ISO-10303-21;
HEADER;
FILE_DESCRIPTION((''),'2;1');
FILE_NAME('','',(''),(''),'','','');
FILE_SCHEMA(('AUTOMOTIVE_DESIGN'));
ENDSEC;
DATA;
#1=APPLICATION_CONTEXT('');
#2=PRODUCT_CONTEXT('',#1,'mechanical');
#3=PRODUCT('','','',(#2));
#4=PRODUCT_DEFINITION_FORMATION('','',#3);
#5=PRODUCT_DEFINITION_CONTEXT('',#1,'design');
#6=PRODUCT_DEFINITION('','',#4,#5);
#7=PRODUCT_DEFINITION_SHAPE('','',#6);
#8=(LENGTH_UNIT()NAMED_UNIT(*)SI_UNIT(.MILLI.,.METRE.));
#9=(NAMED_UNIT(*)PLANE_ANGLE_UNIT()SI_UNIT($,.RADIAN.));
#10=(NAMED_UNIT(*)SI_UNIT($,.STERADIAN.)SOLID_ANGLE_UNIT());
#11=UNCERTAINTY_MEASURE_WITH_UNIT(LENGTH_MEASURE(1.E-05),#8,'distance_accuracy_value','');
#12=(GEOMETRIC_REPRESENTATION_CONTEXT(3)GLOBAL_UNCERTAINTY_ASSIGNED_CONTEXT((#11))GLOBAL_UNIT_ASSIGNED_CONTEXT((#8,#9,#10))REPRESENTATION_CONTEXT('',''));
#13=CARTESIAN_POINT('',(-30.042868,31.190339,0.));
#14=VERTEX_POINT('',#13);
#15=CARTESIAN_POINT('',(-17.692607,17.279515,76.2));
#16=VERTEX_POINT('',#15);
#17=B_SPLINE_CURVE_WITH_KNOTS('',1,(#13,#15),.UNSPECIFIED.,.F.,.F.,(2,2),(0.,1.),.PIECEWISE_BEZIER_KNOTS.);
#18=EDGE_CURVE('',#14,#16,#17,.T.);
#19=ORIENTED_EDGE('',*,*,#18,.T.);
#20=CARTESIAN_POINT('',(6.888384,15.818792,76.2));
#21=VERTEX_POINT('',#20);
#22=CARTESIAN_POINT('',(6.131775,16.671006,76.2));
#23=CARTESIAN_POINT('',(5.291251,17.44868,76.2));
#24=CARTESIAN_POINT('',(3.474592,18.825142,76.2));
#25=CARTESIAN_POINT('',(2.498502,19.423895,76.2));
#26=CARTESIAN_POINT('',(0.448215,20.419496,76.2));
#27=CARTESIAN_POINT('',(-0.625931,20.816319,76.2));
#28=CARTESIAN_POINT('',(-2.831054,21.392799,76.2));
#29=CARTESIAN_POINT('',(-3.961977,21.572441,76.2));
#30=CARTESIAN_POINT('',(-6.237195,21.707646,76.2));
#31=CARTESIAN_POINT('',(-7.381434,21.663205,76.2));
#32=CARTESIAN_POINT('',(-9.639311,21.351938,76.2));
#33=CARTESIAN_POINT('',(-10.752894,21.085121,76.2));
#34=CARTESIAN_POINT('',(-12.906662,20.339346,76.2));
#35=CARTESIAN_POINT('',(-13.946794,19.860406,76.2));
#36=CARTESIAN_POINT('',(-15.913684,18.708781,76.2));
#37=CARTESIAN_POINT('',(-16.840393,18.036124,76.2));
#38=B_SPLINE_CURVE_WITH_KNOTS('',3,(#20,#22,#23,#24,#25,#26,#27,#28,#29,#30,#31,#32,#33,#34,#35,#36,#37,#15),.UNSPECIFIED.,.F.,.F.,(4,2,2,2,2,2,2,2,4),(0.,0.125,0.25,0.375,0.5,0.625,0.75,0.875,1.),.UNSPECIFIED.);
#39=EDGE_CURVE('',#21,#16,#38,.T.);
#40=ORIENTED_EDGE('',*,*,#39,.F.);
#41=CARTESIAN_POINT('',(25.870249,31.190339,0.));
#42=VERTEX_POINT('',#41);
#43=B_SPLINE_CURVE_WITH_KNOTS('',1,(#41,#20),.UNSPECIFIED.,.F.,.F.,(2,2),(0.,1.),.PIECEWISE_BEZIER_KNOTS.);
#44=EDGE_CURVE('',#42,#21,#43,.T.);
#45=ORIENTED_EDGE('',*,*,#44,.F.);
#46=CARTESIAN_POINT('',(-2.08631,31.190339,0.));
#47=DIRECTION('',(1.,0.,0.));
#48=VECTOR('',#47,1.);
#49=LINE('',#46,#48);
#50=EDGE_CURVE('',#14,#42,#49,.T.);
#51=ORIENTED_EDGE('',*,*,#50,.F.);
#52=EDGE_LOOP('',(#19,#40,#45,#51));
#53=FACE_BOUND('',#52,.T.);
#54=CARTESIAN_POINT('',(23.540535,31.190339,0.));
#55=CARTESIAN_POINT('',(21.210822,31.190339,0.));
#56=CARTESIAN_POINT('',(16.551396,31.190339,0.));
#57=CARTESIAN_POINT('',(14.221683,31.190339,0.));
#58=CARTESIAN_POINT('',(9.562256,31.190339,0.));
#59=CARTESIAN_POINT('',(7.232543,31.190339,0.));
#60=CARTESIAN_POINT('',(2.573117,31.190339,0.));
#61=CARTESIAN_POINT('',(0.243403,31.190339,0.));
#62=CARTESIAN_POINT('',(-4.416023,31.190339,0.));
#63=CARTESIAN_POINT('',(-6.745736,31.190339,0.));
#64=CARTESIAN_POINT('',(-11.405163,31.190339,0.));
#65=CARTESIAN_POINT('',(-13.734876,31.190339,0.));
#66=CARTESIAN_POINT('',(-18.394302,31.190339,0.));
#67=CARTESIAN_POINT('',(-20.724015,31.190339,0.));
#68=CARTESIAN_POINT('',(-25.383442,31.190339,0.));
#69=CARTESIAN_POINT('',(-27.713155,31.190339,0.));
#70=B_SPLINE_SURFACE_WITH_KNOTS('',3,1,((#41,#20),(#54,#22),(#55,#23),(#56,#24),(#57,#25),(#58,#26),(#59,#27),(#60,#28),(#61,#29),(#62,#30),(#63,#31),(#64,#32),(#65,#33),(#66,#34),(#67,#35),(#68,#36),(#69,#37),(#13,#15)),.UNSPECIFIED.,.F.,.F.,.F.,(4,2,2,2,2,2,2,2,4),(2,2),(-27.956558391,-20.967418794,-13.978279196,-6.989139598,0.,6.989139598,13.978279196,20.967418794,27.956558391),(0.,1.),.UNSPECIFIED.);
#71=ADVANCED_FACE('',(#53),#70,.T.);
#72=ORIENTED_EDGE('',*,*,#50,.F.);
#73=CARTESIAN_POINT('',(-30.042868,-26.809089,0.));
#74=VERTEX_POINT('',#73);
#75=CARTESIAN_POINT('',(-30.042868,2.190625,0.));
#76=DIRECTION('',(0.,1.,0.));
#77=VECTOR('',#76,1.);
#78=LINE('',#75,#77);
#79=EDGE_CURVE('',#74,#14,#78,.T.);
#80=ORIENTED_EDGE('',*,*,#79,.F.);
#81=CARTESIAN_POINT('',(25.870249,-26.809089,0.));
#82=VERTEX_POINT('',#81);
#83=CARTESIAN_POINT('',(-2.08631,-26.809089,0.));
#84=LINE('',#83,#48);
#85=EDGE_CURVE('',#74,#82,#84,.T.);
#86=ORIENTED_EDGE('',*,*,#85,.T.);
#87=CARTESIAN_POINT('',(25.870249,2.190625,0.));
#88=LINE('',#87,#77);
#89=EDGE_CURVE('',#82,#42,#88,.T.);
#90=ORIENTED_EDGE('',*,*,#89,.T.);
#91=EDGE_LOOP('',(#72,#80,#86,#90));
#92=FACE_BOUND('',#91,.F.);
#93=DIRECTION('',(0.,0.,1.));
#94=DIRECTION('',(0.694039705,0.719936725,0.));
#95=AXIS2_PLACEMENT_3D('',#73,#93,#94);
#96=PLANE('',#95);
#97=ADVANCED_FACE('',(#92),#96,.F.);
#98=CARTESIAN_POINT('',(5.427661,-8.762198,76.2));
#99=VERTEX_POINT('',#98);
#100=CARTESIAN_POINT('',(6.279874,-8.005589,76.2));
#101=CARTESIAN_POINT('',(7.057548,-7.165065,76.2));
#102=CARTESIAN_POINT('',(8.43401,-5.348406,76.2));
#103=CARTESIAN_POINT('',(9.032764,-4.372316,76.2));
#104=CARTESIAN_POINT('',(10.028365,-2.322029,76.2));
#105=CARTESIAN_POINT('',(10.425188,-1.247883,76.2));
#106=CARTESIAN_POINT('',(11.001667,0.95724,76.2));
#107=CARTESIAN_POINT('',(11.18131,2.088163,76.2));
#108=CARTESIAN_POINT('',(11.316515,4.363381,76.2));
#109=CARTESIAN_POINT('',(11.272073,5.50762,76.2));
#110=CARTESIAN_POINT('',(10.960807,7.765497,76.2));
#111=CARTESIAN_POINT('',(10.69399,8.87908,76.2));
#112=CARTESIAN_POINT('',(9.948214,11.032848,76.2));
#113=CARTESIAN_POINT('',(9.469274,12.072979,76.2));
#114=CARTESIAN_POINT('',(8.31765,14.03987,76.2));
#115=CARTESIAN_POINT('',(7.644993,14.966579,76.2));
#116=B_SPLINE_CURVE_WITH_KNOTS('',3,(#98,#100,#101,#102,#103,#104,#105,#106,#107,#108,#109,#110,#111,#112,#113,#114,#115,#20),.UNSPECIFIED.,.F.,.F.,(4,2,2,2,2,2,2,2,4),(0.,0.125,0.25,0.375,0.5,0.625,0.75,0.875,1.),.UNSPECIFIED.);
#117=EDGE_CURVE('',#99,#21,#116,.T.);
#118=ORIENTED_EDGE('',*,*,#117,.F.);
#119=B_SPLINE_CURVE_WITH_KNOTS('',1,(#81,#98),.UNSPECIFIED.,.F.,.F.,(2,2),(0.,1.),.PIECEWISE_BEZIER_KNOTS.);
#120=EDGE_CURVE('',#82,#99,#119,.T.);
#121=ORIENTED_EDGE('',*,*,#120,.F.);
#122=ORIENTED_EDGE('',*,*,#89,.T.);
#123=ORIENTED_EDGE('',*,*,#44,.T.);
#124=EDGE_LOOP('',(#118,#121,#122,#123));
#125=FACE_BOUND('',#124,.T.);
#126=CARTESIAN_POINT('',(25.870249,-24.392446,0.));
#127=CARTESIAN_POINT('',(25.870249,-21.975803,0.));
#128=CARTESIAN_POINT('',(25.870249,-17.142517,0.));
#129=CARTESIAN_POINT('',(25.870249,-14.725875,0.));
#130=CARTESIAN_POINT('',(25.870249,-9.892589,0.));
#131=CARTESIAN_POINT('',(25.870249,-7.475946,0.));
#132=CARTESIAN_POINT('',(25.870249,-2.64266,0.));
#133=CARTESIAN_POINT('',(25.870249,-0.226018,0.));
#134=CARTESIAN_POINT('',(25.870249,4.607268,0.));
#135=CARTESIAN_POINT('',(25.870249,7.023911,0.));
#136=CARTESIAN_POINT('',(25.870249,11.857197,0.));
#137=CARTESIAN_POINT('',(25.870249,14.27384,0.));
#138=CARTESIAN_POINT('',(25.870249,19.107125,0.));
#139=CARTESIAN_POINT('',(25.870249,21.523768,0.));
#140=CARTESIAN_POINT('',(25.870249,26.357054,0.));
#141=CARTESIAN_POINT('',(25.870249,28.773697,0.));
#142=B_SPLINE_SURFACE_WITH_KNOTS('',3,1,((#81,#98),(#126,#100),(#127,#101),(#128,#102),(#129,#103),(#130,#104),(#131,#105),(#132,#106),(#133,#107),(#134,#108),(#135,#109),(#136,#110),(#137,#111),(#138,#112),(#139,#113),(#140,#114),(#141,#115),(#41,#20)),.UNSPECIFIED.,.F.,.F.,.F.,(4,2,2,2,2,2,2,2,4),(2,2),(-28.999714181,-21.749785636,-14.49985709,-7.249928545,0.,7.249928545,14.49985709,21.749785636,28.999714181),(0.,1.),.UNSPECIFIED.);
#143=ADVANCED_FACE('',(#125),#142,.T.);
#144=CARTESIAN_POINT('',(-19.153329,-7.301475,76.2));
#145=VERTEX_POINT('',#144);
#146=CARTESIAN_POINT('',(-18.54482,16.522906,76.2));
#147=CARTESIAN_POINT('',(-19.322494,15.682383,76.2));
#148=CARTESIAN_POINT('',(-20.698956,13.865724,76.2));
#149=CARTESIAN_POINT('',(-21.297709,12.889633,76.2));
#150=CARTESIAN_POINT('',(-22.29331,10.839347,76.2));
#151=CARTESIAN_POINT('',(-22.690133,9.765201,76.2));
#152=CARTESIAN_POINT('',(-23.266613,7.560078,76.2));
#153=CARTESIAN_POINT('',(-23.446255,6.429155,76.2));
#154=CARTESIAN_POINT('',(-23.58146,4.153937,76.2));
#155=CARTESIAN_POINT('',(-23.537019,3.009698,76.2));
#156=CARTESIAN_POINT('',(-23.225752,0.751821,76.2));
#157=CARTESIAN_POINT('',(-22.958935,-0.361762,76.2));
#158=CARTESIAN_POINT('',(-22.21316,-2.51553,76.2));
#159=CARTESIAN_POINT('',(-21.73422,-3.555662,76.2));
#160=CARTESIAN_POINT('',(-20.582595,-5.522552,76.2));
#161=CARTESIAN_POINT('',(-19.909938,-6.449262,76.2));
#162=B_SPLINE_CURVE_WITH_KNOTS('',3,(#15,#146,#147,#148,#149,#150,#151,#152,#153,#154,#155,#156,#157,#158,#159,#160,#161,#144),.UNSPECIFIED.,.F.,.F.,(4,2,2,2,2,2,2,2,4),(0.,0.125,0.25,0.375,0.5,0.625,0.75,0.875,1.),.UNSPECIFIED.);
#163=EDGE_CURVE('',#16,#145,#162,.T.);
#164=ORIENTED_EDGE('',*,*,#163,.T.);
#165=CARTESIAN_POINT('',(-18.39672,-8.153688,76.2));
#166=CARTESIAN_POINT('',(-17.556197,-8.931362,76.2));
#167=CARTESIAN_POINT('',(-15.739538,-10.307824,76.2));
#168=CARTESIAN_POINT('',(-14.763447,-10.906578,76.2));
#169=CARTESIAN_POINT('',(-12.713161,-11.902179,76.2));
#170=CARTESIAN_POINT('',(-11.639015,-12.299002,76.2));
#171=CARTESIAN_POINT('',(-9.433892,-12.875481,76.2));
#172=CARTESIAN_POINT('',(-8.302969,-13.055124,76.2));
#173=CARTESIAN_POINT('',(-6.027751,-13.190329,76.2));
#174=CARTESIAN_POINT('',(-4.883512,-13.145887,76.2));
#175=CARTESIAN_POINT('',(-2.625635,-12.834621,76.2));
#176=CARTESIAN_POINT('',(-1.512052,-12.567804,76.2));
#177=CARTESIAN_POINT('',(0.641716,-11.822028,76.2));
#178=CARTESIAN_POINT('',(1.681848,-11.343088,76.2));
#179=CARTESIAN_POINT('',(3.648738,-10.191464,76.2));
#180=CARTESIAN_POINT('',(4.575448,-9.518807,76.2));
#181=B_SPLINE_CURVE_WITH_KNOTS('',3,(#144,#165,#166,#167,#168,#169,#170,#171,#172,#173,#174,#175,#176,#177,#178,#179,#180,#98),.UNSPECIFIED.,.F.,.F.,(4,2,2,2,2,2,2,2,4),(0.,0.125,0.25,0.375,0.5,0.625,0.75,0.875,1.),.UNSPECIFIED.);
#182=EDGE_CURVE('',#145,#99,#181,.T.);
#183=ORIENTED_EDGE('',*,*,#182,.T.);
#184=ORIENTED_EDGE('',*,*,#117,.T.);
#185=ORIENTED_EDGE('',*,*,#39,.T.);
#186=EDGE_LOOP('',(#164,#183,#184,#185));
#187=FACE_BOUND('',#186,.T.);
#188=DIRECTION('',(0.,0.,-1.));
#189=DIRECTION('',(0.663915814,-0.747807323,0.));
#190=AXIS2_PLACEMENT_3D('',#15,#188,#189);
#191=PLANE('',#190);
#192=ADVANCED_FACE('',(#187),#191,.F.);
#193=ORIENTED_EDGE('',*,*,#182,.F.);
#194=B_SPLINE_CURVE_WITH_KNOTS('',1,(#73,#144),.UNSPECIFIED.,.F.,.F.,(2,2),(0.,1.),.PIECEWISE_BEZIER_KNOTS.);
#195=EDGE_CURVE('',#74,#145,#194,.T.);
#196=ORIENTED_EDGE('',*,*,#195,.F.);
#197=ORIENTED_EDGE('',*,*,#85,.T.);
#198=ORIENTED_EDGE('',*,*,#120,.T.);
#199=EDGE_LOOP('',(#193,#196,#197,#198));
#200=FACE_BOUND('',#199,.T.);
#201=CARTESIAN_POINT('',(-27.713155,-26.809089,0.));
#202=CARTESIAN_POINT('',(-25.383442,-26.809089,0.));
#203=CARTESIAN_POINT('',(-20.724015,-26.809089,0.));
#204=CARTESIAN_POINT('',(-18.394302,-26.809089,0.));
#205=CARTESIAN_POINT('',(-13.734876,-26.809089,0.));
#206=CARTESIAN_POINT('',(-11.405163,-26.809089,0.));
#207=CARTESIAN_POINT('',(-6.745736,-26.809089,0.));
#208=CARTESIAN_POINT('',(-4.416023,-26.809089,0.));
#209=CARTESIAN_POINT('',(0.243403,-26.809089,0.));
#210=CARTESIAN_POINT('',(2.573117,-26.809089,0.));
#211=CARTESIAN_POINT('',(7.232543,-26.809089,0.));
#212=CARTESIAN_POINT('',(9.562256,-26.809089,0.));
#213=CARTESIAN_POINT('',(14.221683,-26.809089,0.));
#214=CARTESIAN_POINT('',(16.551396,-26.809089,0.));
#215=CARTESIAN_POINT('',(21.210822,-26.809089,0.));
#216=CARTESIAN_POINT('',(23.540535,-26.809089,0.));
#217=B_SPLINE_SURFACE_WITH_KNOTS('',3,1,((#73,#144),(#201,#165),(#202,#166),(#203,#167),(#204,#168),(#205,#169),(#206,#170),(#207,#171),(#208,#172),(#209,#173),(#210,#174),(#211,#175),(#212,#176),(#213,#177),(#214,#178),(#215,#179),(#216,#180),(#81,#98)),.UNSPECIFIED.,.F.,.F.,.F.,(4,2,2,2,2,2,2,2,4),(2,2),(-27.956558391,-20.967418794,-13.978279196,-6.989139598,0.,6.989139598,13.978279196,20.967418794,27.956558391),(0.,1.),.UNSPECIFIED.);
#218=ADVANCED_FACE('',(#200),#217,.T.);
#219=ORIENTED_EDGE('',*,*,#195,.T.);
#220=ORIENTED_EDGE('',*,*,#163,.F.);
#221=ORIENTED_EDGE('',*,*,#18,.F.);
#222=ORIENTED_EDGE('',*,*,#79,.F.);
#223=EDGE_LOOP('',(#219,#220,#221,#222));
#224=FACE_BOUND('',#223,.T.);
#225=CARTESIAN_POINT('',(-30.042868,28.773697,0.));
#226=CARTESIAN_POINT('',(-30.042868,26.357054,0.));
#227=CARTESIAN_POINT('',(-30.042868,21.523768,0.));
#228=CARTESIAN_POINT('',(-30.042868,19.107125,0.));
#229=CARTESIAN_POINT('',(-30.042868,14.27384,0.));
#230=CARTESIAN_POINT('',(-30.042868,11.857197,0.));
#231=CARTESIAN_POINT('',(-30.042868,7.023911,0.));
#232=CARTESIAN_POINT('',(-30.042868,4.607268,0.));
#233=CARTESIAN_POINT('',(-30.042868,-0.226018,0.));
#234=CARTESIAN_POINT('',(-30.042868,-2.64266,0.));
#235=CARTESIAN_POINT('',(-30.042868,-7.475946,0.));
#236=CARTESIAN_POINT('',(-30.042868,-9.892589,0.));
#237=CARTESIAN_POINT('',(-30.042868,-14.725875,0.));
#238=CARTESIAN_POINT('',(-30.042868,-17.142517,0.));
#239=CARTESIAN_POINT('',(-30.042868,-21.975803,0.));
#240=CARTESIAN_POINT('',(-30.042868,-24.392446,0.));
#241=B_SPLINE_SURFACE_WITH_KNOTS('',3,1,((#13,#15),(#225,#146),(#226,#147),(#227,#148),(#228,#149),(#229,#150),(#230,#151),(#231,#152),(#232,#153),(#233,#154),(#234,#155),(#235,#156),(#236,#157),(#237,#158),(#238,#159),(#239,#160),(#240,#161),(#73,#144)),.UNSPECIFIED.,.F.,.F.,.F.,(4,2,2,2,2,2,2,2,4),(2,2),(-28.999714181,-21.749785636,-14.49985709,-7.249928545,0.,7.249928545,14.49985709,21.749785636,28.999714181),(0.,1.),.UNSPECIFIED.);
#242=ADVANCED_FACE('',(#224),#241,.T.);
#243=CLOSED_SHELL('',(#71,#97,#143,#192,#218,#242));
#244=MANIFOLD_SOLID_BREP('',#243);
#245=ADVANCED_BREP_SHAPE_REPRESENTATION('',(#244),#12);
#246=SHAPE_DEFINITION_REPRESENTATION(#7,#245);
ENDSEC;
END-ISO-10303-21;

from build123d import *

# Parameters (mm, degrees)
F0_W = 55.9131167829
F0_H = 57.9994283617


# Not quite as in the source:
# - the arcs of a loft's sections are written as splines that run evenly, so that the points pair up as in the source's solid


with BuildPart() as f3:
    # F0 (on Top) → F3 section 0
    with BuildSketch(Plane.XY):
        with Locations((-2.0863097161, 2.190625295)):
            Rectangle(F0_W, F0_H)
    # F2 (on offset) → F3 section 1
    with BuildSketch(Plane.XY.offset(76.2)):
        with BuildLine():
            add(Edge.make_bspline(
                [(-17.692606509, 17.2795154284), (-18.5448195866, 16.5229064446), (-19.3224939536, 15.682382583), (-20.6989558576, 13.8657236269), (-21.2977093588, 12.8896334528), (-22.2933103526, 10.8393466931), (-22.6901332268, 9.7652008047), (-23.2666129225, 7.5600776116), (-23.4462554892, 6.429154833), (-23.5814600953, 4.1539368543), (-23.5370187915, 3.0096979135), (-23.2257524708, 0.7518205002), (-22.9589351508, -0.3617621419), (-22.2131596936, -2.5155300272), (-21.7342199972, -3.5556620142), (-20.5825951361, -5.5225522793), (-19.9099384474, -6.4492619222), (-19.1533294636, -7.3014749999)],
                knots=[0, 0, 0, 0, 0.125, 0.125, 0.25, 0.25, 0.375, 0.375, 0.5, 0.5, 0.625, 0.625, 0.75, 0.75, 0.875, 0.875, 1, 1, 1, 1], degree=3))
            add(Edge.make_bspline(
                [(-19.1533294636, -7.3014749999), (-18.3967204798, -8.1536880775), (-17.5561966182, -8.9313624445), (-15.7395376621, -10.3078243485), (-14.7634474881, -10.9065778497), (-12.7131607283, -11.9021788435), (-11.6390148399, -12.2990017177), (-9.4338916468, -12.8754814134), (-8.3029688682, -13.0551239801), (-6.0277508895, -13.1903285862), (-4.8835119487, -13.1458872824), (-2.6256345354, -12.8346209617), (-1.5120518933, -12.5678036417), (0.641715992, -11.8220281845), (1.681847979, -11.3430884881), (3.6487382441, -10.191463627), (4.575447887, -9.5188069383), (5.4276609647, -8.7621979545)],
                knots=[0, 0, 0, 0, 0.125, 0.125, 0.25, 0.25, 0.375, 0.375, 0.5, 0.5, 0.625, 0.625, 0.75, 0.75, 0.875, 0.875, 1, 1, 1, 1], degree=3))
            add(Edge.make_bspline(
                [(5.4276609647, -8.7621979545), (6.2798740423, -8.0055889707), (7.0575484093, -7.1650651091), (8.4340103133, -5.348406153), (9.0327638145, -4.372315979), (10.0283648083, -2.3220292192), (10.4251876825, -1.2478833308), (11.0016673782, 0.9572398623), (11.1813099449, 2.0881626409), (11.316514551, 4.3633806196), (11.2720732472, 5.5076195604), (10.9608069265, 7.7654969737), (10.6939896065, 8.8790796158), (9.9482141493, 11.0328475011), (9.4692744529, 12.072979488), (8.3176495918, 14.0398697532), (7.6449929031, 14.9665793961), (6.8883839193, 15.8187924737)],
                knots=[0, 0, 0, 0, 0.125, 0.125, 0.25, 0.25, 0.375, 0.375, 0.5, 0.5, 0.625, 0.625, 0.75, 0.75, 0.875, 0.875, 1, 1, 1, 1], degree=3))
            add(Edge.make_bspline(
                [(6.8883839193, 15.8187924737), (6.1317749355, 16.6710055514), (5.2912510739, 17.4486799184), (3.4745921178, 18.8251418224), (2.4985019438, 19.4238953236), (0.448215184, 20.4194963174), (-0.6259307044, 20.8163191916), (-2.8310538975, 21.3927988873), (-3.9619766761, 21.572441454), (-6.2371946548, 21.7076460601), (-7.3814335956, 21.6632047563), (-9.6393110089, 21.3519384356), (-10.752893651, 21.0851211156), (-12.9066615363, 20.3393456584), (-13.9467935233, 19.860405962), (-15.9136837884, 18.7087811009), (-16.8403934313, 18.0361244122), (-17.692606509, 17.2795154284)],
                knots=[0, 0, 0, 0, 0.125, 0.125, 0.25, 0.25, 0.375, 0.375, 0.5, 0.5, 0.625, 0.625, 0.75, 0.75, 0.875, 0.875, 1, 1, 1, 1], degree=3))
        make_face()
    loft(ruled=True)


solid = f3.part
